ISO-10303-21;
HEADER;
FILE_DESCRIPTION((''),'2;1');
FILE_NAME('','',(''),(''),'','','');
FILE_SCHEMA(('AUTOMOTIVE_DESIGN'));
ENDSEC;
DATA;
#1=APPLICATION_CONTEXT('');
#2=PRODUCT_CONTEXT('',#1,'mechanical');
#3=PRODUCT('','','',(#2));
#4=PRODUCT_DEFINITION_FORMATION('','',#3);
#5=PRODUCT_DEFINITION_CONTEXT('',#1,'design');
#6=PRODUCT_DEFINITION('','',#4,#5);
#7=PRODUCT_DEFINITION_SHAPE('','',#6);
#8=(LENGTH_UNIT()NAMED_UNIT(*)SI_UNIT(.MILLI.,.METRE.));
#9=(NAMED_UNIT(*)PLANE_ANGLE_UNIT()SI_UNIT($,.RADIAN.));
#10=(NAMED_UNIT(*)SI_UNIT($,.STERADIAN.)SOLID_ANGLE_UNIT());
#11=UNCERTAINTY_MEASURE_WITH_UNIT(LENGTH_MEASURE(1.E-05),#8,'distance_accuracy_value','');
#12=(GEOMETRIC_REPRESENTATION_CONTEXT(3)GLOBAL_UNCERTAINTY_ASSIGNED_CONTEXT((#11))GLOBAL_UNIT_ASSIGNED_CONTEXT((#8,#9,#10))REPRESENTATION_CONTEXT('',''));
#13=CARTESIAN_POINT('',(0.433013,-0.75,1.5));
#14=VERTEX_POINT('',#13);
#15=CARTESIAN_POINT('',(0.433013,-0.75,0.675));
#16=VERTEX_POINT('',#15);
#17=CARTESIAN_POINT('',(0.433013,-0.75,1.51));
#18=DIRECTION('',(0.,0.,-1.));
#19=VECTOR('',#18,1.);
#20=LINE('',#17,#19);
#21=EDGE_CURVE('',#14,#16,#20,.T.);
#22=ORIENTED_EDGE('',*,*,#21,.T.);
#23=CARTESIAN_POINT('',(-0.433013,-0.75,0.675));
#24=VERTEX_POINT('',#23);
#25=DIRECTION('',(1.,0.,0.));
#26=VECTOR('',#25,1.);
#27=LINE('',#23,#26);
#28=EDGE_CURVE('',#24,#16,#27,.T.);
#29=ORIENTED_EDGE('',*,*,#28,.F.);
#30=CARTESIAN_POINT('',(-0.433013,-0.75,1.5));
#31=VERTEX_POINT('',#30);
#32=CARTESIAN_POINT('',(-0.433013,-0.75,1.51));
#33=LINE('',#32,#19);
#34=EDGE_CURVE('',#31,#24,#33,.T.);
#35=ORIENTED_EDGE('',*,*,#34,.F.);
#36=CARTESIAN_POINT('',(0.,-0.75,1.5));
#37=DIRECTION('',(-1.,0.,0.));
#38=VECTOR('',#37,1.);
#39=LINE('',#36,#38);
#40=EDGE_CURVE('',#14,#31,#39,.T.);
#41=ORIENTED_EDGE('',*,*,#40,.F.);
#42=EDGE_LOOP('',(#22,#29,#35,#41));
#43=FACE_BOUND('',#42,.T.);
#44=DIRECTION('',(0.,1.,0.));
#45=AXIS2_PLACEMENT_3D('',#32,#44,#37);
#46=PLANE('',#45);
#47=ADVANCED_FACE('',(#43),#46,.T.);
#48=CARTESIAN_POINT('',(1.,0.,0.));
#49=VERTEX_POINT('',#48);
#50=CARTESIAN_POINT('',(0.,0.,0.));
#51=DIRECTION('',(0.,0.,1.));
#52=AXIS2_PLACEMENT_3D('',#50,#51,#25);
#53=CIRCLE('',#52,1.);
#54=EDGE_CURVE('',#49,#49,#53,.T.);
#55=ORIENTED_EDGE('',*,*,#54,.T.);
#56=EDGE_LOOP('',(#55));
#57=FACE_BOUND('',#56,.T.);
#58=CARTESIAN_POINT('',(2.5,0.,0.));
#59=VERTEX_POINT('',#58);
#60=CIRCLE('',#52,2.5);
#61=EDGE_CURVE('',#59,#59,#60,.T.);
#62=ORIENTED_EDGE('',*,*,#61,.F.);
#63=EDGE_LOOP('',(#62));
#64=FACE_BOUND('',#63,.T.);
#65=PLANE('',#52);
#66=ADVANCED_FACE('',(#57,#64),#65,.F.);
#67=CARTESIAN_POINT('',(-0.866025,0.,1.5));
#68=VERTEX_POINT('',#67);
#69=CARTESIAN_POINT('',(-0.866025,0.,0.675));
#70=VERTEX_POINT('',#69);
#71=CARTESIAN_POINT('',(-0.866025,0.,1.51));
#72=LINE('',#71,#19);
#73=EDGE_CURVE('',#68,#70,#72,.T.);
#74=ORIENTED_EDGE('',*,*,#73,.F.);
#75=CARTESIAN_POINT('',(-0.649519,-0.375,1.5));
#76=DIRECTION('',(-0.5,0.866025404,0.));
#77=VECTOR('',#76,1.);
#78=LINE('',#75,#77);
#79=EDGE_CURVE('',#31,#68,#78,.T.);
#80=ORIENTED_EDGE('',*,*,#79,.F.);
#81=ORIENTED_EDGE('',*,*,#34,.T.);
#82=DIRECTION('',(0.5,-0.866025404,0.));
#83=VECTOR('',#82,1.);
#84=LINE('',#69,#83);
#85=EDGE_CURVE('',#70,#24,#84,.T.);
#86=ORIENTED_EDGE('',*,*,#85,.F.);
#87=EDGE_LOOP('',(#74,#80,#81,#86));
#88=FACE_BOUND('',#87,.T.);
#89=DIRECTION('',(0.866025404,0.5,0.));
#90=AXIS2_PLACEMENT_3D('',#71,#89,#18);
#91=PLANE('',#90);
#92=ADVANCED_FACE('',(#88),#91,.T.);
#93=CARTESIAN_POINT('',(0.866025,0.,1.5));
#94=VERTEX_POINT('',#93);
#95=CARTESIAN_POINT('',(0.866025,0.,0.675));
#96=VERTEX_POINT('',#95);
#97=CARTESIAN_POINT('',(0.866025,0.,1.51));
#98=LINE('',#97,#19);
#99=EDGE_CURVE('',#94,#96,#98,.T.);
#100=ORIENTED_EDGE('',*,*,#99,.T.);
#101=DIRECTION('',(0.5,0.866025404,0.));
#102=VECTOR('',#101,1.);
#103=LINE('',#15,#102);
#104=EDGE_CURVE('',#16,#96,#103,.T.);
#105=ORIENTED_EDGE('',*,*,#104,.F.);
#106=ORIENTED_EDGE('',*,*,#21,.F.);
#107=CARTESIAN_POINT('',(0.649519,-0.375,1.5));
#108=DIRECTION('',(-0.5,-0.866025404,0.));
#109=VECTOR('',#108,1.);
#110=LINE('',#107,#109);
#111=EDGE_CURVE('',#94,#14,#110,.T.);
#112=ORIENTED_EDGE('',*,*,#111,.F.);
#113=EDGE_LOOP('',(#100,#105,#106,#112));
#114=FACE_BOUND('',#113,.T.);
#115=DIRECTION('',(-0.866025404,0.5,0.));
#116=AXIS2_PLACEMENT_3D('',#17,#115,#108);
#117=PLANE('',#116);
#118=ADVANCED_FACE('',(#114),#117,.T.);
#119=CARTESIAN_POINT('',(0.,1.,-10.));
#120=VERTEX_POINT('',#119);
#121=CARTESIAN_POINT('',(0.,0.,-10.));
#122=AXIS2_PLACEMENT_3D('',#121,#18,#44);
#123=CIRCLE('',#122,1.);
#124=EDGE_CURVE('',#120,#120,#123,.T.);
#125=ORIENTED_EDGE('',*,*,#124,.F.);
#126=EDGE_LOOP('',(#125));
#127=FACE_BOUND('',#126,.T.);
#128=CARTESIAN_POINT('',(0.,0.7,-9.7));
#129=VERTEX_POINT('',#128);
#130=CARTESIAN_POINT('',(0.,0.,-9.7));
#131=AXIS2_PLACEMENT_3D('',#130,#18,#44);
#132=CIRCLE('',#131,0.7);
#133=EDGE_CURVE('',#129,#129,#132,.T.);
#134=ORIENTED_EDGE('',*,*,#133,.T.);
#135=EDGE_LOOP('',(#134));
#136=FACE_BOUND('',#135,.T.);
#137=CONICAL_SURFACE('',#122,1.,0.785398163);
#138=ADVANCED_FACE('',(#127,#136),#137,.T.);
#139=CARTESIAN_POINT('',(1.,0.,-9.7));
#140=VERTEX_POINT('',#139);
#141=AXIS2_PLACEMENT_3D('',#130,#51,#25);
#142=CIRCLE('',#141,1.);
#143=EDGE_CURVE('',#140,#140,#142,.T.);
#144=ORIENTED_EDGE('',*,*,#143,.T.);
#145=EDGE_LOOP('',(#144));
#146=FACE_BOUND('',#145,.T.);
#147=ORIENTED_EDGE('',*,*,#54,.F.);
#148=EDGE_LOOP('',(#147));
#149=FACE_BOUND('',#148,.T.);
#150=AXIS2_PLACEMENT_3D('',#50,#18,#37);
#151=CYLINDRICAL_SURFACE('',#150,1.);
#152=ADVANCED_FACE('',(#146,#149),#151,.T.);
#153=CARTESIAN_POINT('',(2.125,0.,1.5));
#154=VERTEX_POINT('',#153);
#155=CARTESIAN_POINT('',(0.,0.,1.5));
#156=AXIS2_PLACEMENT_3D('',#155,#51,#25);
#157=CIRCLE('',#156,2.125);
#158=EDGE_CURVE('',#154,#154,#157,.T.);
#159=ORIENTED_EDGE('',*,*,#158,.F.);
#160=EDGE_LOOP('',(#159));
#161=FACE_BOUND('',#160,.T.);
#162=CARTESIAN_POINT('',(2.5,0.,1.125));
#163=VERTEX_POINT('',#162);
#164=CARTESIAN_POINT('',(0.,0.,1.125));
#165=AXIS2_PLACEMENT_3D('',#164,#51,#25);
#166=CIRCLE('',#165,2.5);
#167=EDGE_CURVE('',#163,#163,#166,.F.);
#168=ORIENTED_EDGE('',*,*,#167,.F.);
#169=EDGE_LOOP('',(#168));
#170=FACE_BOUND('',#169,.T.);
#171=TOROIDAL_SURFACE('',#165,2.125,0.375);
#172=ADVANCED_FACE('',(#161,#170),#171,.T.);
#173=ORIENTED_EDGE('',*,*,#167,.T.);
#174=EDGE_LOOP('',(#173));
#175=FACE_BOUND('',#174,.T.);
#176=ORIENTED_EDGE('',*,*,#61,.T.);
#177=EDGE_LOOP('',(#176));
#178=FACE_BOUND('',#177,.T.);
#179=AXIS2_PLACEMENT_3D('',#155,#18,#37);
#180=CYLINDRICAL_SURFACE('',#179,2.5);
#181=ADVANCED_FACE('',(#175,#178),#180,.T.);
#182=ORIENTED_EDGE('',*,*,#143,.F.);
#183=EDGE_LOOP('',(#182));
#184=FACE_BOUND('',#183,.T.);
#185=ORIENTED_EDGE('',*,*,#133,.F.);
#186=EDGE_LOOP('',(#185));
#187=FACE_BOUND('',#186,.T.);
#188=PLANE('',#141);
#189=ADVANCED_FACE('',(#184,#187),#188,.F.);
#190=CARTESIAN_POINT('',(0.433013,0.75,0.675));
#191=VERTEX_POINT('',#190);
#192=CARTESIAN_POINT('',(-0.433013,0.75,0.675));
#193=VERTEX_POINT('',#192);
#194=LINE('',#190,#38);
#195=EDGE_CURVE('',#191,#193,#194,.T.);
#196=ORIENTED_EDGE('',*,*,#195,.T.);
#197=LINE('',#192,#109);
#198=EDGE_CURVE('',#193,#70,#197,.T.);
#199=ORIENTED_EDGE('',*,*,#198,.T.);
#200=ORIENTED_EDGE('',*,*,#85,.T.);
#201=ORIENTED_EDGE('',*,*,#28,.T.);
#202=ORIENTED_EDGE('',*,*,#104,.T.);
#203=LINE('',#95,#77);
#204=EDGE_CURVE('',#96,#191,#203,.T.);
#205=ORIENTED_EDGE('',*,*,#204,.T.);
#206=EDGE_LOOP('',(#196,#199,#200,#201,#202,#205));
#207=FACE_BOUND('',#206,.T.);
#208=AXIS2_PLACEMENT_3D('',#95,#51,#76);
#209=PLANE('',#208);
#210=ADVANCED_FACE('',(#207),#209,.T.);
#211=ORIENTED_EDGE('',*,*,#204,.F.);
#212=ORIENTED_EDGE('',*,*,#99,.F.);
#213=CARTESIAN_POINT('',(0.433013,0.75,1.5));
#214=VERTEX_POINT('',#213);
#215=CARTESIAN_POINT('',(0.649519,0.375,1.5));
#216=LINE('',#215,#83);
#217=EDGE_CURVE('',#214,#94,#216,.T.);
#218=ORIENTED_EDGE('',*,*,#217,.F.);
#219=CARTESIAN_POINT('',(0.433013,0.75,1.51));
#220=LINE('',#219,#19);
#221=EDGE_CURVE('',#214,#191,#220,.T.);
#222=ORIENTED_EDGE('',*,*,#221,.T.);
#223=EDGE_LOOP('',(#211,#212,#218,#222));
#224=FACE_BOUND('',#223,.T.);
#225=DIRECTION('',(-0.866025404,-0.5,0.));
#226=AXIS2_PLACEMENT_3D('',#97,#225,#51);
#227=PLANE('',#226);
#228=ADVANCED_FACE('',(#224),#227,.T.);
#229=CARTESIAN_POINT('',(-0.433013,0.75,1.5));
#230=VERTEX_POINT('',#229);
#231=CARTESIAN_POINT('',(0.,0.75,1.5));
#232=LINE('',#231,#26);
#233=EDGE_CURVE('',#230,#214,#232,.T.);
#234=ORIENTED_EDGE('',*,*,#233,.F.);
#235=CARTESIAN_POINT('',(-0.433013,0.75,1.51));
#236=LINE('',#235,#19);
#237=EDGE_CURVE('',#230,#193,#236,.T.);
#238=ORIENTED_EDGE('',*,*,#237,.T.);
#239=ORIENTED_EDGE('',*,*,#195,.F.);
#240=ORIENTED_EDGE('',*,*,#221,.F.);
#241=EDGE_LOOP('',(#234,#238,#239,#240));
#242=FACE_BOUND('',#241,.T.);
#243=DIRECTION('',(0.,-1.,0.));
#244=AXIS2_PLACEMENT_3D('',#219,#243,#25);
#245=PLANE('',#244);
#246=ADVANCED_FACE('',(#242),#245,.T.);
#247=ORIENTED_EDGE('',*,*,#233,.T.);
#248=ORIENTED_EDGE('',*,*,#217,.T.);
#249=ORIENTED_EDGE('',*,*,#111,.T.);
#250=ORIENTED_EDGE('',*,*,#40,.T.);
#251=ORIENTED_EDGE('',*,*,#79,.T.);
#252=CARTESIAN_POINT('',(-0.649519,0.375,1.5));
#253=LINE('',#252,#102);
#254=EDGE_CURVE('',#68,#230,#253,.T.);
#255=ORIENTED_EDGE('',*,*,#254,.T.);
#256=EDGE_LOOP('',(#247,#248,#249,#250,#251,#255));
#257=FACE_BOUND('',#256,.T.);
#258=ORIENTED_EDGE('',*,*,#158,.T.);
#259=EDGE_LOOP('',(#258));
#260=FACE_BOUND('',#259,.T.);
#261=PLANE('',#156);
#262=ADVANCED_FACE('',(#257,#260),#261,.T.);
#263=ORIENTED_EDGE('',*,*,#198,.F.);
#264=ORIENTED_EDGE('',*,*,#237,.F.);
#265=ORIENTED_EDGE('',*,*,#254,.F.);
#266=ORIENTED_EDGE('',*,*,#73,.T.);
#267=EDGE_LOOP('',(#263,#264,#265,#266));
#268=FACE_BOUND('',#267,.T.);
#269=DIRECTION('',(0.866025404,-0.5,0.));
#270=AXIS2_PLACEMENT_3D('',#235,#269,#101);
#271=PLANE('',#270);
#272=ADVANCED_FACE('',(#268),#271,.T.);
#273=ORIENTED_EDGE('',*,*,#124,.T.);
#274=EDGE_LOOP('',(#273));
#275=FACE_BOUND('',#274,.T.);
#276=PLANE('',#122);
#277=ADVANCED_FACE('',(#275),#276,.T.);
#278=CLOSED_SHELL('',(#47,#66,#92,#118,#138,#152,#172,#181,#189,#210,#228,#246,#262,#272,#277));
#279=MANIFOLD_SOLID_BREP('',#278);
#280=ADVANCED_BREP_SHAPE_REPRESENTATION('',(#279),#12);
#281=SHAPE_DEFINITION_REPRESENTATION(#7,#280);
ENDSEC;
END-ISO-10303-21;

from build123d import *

# Parameters (mm, degrees)
F_0000_CYLINDER_SKETCH_R    = 2.5
F_0000_CYLINDER_DEPTH       = 1.5
F_0001_FILLET_R             = 0.375
F_0002_EXTRUDE_DEPTH        = 0.835
F_0002_EXTRUDE_ROTATE_ANGLE = 120
F_0005_CYLINDER_SKETCH_R    = 1
F_0005_CYLINDER_DEPTH       = 9.7
F_0006_CONE_ROTATE_ANGLE    = 90


with BuildPart() as part:
    # 0000_cylinder_Sketch → 0000_cylinder (new body)
    with BuildSketch(Plane.XY):
        Circle(F_0000_CYLINDER_SKETCH_R)
    extrude(amount=F_0000_CYLINDER_DEPTH)

    # 0001_fillet
    f_0001_fillet_edges = [part.edges().sort_by_distance(p)[0] for p in [
        (-2.5, 0, 1.5),
    ]]
    fillet(f_0001_fillet_edges, radius=F_0001_FILLET_R)


with BuildPart() as body_2:
    # 0002_extrude_Sketch → 0002_extrude (new body)
    with BuildSketch(Plane.XY):
        Polygon((0, 0), (0.866025404, 0), (1.299038106, 0.75), (0.866025404, 1.5), (0, 1.5), (-0.433012702, 0.75), align=None)
    extrude(amount=F_0002_EXTRUDE_DEPTH)


with BuildPart() as body_2_1:
    # 0002_extrude_Rotate: read off the stored shape, not the designer's step
    # 0002_extrude_Rotate: moved
    add(body_2.part.rotate(Axis((0, 0, 0), (0, 0, 1)), F_0002_EXTRUDE_ROTATE_ANGLE))


with BuildPart() as body_2_2:
    # 0002_extrude_Translate: moved
    add(body_2_1.part.moved(Location((0.866025404, 0, 0.675))))


with BuildPart() as part_1:
    add(part.part)

    # 0004_sub: cut body 2
    add(body_2_2.part, mode=Mode.SUBTRACT)


with BuildPart() as body_2_2_1:
    # 0005_cylinder_Sketch → 0005_cylinder (new body)
    with BuildSketch(Plane.XY):
        Circle(F_0005_CYLINDER_SKETCH_R)
    extrude(amount=F_0005_CYLINDER_DEPTH)


with BuildPart() as body_2_2_2:
    # 0005_cylinder_Translate: moved
    add(body_2_2_1.part.moved(Location((0, 0, -9.7))))


with BuildPart() as body_3:
    # 0006_cone_Sketch → 0006_cone (revolve)
    with BuildSketch(Plane.XY, mode=Mode.PRIVATE) as f_0006_cone_sk:
        Polygon((0, 0), (1, 0), (0.7, 0.3), (0, 0.3), align=None)
    revolve(f_0006_cone_sk.sketch.rotate(Axis((0, -100, 0), (0, 1, 0)), 90), axis=Axis((0, -100, 0), (0, 1, 0)))


with BuildPart() as body_3_1:
    # 0006_cone_Rotate: moved
    add(body_3.part.rotate(Axis((0, 0, 0), (1, 0, 0)), F_0006_CONE_ROTATE_ANGLE))


with BuildPart() as body_3_2:
    # 0006_cone_Translate: moved
    add(body_3_1.part.moved(Location((0, 0, -10))))


with BuildPart() as body_2_2_3:
    add(body_2_2_2.part)

    # 0008_add: union body 3
    add(body_3_2.part)


with BuildPart() as part_2:
    add(part_1.part)

    # 0009_add: union body 2 2
    add(body_2_2_3.part)


solid = part_2.part
